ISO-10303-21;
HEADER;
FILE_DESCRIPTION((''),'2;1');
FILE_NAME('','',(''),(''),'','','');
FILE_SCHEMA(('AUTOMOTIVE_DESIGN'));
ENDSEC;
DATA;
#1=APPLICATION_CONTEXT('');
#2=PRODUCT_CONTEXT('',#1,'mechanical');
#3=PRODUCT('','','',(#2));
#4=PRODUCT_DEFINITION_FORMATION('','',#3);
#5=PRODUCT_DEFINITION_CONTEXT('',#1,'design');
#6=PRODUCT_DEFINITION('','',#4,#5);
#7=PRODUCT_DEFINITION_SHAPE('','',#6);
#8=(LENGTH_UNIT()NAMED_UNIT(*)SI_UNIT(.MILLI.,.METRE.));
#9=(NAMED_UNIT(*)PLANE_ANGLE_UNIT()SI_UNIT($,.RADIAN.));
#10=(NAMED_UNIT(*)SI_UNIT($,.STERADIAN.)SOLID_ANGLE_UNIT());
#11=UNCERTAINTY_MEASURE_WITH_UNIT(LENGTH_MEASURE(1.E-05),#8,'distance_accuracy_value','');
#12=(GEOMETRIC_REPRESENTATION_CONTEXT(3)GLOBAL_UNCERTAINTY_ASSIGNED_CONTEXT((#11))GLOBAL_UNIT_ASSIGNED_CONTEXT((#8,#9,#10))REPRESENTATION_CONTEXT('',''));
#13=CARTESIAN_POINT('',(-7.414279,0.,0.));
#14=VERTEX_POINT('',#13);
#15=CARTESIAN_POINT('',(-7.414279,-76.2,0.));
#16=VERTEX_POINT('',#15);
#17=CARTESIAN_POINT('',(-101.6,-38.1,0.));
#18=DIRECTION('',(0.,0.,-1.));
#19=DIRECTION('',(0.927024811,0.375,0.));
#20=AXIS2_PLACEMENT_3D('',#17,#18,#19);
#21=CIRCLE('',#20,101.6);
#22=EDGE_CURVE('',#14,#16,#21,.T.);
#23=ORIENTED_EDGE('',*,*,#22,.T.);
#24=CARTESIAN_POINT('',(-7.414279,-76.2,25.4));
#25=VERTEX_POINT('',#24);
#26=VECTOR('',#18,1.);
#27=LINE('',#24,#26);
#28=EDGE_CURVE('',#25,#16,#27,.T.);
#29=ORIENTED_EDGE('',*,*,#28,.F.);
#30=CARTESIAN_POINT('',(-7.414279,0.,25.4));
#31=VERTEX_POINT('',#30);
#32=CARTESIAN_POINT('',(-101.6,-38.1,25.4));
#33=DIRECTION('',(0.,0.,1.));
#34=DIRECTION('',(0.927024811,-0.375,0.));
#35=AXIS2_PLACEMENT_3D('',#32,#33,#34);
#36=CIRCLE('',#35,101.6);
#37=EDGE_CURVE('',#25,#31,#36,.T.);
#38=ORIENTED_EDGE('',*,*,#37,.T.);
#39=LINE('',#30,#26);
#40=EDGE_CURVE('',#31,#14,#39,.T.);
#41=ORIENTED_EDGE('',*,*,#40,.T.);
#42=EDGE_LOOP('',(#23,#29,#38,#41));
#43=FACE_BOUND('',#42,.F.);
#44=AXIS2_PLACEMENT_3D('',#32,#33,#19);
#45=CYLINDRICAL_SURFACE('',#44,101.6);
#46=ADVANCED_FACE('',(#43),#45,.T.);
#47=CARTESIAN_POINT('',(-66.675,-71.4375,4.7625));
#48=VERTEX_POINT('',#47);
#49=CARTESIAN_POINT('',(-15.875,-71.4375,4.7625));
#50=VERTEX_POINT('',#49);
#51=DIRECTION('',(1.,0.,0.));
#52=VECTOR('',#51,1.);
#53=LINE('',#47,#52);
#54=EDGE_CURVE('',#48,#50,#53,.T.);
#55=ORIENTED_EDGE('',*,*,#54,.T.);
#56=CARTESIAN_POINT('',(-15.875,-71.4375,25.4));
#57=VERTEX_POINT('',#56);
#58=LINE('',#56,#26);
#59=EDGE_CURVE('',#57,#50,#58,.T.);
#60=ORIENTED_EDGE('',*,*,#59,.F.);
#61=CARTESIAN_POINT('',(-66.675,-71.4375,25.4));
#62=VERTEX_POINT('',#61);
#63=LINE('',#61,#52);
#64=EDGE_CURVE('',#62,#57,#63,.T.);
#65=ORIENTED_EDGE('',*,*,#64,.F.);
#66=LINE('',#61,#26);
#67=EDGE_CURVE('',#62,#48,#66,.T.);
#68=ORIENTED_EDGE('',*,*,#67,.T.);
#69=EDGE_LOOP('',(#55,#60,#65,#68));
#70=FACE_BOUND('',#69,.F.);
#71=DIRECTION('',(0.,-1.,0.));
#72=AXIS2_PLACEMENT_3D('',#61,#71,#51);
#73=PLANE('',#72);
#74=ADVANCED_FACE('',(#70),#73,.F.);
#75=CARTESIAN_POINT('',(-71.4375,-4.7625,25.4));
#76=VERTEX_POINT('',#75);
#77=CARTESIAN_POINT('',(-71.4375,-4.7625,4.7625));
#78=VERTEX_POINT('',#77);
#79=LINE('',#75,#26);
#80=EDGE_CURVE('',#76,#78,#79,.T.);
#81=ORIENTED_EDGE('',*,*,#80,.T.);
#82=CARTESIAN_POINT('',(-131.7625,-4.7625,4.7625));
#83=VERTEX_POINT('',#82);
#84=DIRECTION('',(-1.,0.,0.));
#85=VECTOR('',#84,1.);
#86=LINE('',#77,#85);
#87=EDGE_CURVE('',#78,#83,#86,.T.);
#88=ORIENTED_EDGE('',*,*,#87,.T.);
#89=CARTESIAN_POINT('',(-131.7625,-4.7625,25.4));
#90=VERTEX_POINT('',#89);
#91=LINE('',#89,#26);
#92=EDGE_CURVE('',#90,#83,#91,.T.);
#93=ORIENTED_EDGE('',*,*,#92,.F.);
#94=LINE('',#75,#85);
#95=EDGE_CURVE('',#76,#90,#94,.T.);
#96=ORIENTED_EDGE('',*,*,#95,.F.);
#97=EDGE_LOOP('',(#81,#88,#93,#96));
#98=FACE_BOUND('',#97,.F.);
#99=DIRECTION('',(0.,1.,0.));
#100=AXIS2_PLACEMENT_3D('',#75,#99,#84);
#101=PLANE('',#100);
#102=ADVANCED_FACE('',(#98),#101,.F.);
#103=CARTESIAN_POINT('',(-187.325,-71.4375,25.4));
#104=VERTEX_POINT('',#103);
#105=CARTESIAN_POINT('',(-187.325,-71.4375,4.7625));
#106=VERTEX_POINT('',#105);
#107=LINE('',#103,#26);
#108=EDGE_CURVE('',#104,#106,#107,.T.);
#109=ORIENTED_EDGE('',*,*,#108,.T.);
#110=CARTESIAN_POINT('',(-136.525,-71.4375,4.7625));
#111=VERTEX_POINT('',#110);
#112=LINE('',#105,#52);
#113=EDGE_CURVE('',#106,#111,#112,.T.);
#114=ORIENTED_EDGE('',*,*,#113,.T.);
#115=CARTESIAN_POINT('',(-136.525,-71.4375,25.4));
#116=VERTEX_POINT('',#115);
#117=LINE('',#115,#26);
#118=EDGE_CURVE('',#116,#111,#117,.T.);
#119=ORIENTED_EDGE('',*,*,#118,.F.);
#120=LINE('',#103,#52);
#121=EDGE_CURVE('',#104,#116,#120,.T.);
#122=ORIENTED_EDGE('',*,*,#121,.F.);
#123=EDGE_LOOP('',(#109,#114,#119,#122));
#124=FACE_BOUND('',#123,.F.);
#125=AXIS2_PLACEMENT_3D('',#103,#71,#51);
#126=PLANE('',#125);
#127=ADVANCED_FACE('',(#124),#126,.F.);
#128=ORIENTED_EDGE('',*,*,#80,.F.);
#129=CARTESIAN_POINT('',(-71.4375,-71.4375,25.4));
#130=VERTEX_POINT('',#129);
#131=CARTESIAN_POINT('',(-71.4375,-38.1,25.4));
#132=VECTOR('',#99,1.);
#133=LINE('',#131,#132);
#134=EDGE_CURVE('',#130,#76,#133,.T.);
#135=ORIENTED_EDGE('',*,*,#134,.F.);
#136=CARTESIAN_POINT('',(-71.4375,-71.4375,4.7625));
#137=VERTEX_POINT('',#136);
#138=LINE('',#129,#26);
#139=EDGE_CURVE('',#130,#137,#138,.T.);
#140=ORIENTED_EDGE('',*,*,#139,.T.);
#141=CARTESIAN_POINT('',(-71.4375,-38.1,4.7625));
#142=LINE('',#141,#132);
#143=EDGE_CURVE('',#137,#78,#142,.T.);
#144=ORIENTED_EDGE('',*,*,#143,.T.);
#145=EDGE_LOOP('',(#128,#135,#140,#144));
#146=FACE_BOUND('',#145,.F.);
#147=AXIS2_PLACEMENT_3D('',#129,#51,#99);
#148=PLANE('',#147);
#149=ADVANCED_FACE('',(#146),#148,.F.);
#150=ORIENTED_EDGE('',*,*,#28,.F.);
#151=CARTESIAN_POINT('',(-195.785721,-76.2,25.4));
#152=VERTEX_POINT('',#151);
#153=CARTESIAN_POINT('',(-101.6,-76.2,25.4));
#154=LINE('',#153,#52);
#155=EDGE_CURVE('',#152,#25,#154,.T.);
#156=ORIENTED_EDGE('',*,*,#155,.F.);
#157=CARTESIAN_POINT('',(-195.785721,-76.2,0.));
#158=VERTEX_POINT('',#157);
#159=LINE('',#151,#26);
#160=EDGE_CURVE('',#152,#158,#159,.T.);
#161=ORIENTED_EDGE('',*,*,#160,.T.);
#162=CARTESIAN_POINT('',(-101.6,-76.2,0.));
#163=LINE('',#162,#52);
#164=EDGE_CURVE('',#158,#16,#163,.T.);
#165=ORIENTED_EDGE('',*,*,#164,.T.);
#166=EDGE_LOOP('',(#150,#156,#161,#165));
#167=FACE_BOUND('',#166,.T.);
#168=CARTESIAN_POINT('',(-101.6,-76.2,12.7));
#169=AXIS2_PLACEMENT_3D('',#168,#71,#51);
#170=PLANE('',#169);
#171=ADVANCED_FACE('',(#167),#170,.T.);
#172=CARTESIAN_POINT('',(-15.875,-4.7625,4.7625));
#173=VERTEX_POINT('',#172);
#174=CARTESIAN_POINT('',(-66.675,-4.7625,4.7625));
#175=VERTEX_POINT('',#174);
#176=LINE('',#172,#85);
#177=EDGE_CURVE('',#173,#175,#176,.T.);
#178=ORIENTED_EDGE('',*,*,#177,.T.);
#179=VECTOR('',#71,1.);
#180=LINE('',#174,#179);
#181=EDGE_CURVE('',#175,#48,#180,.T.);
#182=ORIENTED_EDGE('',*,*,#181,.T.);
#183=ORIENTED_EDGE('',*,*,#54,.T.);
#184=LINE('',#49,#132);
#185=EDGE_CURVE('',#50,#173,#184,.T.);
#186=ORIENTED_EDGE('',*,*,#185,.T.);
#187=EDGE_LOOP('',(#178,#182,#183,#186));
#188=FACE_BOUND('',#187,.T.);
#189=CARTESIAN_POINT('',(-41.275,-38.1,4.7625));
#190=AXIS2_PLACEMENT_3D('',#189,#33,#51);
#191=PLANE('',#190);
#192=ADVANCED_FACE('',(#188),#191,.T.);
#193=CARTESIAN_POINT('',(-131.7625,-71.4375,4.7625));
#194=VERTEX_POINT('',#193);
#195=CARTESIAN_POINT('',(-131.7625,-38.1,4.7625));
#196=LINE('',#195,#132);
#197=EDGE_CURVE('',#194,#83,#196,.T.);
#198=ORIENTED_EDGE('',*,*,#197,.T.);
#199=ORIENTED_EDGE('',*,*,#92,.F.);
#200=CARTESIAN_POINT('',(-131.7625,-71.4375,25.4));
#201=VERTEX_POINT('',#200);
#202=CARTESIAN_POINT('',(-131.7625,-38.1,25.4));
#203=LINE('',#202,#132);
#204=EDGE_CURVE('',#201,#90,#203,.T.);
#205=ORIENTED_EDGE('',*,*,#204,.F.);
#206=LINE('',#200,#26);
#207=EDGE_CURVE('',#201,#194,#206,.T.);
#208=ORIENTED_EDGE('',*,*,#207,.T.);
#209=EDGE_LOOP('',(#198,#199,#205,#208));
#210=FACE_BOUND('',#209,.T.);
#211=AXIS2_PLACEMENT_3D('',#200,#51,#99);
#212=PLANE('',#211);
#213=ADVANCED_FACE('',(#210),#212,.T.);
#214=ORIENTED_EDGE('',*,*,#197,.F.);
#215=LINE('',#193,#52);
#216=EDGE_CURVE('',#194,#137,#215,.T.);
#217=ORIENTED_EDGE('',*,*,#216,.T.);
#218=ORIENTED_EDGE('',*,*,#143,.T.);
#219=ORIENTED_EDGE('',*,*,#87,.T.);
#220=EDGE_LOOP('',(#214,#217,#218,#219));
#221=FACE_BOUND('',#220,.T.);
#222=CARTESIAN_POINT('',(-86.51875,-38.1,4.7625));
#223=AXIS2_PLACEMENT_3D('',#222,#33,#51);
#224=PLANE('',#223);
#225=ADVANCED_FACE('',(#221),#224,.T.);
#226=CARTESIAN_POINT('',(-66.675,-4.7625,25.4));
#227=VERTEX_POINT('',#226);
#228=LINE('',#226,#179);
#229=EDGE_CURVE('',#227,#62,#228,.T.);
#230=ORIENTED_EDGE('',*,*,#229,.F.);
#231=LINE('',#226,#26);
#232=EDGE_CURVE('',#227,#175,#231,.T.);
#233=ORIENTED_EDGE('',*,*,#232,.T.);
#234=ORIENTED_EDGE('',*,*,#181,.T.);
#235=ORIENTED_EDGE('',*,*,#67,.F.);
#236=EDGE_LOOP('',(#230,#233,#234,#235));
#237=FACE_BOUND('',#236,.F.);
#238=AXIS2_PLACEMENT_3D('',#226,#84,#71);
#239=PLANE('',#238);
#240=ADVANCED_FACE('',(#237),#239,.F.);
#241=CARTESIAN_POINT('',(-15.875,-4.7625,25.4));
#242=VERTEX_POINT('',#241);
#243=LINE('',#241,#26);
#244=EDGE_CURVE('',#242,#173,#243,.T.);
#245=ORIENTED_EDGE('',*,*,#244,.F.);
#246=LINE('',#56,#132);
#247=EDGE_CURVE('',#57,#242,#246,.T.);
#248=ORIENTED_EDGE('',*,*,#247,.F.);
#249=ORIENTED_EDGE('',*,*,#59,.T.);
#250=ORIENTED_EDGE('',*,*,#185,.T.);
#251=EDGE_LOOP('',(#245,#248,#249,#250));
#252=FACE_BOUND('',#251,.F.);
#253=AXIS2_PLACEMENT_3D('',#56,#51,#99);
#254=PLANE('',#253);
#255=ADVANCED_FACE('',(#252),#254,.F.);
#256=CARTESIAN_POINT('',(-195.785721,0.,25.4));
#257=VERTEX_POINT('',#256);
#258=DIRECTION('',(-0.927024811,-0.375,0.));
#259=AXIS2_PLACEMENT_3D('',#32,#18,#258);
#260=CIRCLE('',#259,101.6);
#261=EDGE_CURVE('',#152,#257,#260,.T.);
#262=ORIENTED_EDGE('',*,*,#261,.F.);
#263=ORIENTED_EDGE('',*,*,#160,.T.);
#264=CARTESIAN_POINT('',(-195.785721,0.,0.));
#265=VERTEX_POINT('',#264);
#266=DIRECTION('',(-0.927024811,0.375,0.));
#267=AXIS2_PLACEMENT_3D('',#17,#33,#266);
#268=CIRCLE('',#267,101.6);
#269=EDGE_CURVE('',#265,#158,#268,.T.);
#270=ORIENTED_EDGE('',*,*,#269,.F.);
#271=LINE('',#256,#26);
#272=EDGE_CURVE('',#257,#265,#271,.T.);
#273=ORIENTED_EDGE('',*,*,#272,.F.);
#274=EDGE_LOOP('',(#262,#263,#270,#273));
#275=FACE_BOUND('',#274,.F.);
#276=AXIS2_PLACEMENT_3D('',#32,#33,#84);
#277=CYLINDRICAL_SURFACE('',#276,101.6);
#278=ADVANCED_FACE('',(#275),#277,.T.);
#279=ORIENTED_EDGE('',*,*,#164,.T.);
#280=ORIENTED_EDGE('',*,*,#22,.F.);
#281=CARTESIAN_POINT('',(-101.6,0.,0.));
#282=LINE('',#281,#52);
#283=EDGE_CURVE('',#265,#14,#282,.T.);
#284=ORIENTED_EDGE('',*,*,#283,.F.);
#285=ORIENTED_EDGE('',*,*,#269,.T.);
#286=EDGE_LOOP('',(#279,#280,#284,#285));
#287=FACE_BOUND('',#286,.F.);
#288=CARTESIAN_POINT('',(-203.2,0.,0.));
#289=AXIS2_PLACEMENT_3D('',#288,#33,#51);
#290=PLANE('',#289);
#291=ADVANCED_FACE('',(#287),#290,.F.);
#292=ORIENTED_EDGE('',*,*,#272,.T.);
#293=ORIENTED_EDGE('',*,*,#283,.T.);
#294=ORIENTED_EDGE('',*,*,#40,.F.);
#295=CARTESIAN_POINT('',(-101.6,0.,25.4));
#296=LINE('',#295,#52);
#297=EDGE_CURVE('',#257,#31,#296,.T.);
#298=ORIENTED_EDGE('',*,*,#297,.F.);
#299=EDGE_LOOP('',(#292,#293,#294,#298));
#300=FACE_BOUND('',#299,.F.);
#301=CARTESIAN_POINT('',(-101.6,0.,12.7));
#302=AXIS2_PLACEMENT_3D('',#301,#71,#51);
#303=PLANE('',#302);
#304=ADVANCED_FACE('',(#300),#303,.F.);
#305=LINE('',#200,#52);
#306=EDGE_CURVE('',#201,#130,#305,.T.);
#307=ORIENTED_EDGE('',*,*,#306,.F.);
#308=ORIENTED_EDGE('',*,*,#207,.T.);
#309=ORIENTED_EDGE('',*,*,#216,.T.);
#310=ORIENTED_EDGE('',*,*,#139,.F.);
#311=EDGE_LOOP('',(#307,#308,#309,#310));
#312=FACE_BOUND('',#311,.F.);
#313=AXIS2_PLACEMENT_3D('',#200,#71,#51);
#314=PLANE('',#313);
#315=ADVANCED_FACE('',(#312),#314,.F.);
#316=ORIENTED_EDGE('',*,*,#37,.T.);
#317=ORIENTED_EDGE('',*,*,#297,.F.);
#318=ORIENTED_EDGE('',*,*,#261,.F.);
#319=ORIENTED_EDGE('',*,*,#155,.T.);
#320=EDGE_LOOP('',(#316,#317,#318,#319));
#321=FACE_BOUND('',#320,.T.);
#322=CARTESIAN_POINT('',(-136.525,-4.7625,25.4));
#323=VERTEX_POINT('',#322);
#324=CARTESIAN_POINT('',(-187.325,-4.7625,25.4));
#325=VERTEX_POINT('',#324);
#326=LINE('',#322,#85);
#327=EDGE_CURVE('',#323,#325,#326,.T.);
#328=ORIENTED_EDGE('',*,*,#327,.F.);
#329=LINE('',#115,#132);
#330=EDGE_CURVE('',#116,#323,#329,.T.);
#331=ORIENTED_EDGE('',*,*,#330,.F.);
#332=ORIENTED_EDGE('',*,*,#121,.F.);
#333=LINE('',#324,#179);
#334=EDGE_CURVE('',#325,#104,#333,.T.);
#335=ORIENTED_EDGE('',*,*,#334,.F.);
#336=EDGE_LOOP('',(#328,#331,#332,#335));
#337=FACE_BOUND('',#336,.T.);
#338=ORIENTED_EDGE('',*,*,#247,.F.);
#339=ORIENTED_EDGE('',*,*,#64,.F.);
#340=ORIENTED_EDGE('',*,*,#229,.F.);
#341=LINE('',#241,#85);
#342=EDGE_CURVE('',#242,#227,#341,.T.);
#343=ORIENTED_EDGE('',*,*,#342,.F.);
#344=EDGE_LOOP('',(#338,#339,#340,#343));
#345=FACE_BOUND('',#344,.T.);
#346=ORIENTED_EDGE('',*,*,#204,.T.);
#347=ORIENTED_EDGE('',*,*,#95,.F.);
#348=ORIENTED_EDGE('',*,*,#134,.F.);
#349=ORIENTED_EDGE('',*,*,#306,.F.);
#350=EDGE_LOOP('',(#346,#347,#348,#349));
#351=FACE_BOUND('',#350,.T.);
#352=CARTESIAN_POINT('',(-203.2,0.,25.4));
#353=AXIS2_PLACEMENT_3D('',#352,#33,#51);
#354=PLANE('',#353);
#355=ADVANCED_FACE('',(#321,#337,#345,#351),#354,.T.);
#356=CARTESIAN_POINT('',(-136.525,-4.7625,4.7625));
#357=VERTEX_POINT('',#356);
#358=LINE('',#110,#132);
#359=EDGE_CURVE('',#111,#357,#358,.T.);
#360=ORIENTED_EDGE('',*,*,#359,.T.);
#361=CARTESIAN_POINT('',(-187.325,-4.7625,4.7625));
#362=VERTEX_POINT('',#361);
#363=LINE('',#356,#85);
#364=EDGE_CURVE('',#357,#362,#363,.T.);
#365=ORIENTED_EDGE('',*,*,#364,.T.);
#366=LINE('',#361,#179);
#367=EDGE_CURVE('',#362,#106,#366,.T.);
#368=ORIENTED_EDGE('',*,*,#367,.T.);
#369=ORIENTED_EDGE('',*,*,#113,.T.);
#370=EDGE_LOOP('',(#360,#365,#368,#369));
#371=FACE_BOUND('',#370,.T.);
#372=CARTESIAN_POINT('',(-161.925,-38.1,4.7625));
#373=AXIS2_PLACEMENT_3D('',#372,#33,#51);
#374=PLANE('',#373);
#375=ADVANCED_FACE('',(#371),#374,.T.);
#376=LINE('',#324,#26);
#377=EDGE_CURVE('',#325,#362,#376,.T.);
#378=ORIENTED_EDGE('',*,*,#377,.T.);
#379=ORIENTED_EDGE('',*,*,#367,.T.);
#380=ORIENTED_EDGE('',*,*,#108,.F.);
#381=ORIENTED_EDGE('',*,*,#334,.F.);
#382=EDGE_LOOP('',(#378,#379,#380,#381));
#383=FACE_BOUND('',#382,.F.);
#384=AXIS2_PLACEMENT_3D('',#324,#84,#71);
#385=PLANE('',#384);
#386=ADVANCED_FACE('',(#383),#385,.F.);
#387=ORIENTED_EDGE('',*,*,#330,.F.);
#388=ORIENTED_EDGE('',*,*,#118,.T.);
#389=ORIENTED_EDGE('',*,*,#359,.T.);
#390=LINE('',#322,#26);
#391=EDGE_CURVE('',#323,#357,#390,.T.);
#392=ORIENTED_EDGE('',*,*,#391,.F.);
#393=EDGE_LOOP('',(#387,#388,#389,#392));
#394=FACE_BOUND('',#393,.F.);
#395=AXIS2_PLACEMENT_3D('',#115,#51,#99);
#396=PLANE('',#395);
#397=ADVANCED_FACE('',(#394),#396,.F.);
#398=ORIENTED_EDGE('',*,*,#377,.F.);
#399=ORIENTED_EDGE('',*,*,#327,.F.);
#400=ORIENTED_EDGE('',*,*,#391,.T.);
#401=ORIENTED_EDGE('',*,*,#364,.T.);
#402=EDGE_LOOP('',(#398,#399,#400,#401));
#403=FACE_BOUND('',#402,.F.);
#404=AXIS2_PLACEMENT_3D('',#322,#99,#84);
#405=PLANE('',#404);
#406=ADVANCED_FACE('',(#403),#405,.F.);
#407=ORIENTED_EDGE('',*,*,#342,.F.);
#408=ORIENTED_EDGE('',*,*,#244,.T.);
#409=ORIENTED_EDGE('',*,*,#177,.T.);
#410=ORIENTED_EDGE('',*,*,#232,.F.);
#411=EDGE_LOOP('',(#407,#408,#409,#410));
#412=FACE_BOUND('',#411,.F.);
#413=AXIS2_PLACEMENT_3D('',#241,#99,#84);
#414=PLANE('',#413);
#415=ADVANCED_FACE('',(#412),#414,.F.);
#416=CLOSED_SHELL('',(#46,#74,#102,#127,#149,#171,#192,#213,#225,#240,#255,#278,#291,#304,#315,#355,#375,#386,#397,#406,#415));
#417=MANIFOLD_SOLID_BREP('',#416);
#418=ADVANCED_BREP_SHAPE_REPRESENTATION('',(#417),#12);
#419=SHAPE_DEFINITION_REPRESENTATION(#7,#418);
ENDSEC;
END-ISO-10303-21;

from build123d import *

# Parameters (mm, degrees)
F0_W     = 203.2
F0_H     = 25.4
F1_DEPTH = 76.2
F3_DEPTH = 25.4
F4_W     = 30.1625
F4_H     = 66.675
F5_DEPTH = 20.6375


with BuildPart() as f1:
    # F0 (on Front) → F1 (new body)
    with BuildSketch(Plane.XZ):
        with Locations((-101.6, 12.7)):
            Rectangle(F0_W, F0_H)
    extrude(amount=F1_DEPTH)

    # F2 (on face) → F3 (cut)
    with BuildSketch(Plane.XY.offset(25.4)):
        with BuildLine():
            Line((0, -76.2), (0, -38.1))
            ThreePointArc((0, -38.1), (-1.8707935661, -57.5073538656), (-7.4142792139, -76.2))
            Line((-7.4142792139, -76.2), (0, -76.2))
        make_face()
        with BuildLine():
            ThreePointArc((-7.4142792139, 0), (-1.8707935661, -18.6926461344), (0, -38.1))
            Line((0, -38.1), (0, 0))
            Line((0, 0), (-7.4142792139, 0))
        make_face()
        with BuildLine():
            ThreePointArc((-195.7857207861, -76.2), (-101.6, -139.7), (-7.4142792139, -76.2))
            Line((-7.4142792139, -76.2), (-195.7857207861, -76.2))
        make_face()
        with BuildLine():
            ThreePointArc((-203.2, -38.1), (-201.3292064339, -18.6926461344), (-195.7857207861, 0))
            Line((-195.7857207861, 0), (-203.2, 0))
            Line((-203.2, 0), (-203.2, -38.1))
        make_face()
        with BuildLine():
            Line((-203.2, -76.2), (-195.7857207861, -76.2))
            ThreePointArc((-195.7857207861, -76.2), (-201.3292064339, -57.5073538656), (-203.2, -38.1))
            Line((-203.2, -38.1), (-203.2, -76.2))
        make_face()
    extrude(amount=-F3_DEPTH, mode=Mode.SUBTRACT)

    # F4 (on face) → F5 (cut)
    with BuildSketch(Plane.XY.offset(25.4)):
        Polygon((-187.325, -4.7625), (-187.325, -38.1), (-187.325, -71.4375), (-136.525, -71.4375), (-136.525, -4.7625), align=None)
        Polygon((-15.875, -71.4375), (-15.875, -38.1), (-15.875, -4.7625), (-66.675, -4.7625), (-66.675, -71.4375), align=None)
        with Locations((-86.51875, -38.1)):
            Rectangle(F4_W, F4_H)
        with Locations((-116.68125, -38.1)):
            Rectangle(F4_W, F4_H)
    extrude(amount=-F5_DEPTH, mode=Mode.SUBTRACT)


solid = f1.part
